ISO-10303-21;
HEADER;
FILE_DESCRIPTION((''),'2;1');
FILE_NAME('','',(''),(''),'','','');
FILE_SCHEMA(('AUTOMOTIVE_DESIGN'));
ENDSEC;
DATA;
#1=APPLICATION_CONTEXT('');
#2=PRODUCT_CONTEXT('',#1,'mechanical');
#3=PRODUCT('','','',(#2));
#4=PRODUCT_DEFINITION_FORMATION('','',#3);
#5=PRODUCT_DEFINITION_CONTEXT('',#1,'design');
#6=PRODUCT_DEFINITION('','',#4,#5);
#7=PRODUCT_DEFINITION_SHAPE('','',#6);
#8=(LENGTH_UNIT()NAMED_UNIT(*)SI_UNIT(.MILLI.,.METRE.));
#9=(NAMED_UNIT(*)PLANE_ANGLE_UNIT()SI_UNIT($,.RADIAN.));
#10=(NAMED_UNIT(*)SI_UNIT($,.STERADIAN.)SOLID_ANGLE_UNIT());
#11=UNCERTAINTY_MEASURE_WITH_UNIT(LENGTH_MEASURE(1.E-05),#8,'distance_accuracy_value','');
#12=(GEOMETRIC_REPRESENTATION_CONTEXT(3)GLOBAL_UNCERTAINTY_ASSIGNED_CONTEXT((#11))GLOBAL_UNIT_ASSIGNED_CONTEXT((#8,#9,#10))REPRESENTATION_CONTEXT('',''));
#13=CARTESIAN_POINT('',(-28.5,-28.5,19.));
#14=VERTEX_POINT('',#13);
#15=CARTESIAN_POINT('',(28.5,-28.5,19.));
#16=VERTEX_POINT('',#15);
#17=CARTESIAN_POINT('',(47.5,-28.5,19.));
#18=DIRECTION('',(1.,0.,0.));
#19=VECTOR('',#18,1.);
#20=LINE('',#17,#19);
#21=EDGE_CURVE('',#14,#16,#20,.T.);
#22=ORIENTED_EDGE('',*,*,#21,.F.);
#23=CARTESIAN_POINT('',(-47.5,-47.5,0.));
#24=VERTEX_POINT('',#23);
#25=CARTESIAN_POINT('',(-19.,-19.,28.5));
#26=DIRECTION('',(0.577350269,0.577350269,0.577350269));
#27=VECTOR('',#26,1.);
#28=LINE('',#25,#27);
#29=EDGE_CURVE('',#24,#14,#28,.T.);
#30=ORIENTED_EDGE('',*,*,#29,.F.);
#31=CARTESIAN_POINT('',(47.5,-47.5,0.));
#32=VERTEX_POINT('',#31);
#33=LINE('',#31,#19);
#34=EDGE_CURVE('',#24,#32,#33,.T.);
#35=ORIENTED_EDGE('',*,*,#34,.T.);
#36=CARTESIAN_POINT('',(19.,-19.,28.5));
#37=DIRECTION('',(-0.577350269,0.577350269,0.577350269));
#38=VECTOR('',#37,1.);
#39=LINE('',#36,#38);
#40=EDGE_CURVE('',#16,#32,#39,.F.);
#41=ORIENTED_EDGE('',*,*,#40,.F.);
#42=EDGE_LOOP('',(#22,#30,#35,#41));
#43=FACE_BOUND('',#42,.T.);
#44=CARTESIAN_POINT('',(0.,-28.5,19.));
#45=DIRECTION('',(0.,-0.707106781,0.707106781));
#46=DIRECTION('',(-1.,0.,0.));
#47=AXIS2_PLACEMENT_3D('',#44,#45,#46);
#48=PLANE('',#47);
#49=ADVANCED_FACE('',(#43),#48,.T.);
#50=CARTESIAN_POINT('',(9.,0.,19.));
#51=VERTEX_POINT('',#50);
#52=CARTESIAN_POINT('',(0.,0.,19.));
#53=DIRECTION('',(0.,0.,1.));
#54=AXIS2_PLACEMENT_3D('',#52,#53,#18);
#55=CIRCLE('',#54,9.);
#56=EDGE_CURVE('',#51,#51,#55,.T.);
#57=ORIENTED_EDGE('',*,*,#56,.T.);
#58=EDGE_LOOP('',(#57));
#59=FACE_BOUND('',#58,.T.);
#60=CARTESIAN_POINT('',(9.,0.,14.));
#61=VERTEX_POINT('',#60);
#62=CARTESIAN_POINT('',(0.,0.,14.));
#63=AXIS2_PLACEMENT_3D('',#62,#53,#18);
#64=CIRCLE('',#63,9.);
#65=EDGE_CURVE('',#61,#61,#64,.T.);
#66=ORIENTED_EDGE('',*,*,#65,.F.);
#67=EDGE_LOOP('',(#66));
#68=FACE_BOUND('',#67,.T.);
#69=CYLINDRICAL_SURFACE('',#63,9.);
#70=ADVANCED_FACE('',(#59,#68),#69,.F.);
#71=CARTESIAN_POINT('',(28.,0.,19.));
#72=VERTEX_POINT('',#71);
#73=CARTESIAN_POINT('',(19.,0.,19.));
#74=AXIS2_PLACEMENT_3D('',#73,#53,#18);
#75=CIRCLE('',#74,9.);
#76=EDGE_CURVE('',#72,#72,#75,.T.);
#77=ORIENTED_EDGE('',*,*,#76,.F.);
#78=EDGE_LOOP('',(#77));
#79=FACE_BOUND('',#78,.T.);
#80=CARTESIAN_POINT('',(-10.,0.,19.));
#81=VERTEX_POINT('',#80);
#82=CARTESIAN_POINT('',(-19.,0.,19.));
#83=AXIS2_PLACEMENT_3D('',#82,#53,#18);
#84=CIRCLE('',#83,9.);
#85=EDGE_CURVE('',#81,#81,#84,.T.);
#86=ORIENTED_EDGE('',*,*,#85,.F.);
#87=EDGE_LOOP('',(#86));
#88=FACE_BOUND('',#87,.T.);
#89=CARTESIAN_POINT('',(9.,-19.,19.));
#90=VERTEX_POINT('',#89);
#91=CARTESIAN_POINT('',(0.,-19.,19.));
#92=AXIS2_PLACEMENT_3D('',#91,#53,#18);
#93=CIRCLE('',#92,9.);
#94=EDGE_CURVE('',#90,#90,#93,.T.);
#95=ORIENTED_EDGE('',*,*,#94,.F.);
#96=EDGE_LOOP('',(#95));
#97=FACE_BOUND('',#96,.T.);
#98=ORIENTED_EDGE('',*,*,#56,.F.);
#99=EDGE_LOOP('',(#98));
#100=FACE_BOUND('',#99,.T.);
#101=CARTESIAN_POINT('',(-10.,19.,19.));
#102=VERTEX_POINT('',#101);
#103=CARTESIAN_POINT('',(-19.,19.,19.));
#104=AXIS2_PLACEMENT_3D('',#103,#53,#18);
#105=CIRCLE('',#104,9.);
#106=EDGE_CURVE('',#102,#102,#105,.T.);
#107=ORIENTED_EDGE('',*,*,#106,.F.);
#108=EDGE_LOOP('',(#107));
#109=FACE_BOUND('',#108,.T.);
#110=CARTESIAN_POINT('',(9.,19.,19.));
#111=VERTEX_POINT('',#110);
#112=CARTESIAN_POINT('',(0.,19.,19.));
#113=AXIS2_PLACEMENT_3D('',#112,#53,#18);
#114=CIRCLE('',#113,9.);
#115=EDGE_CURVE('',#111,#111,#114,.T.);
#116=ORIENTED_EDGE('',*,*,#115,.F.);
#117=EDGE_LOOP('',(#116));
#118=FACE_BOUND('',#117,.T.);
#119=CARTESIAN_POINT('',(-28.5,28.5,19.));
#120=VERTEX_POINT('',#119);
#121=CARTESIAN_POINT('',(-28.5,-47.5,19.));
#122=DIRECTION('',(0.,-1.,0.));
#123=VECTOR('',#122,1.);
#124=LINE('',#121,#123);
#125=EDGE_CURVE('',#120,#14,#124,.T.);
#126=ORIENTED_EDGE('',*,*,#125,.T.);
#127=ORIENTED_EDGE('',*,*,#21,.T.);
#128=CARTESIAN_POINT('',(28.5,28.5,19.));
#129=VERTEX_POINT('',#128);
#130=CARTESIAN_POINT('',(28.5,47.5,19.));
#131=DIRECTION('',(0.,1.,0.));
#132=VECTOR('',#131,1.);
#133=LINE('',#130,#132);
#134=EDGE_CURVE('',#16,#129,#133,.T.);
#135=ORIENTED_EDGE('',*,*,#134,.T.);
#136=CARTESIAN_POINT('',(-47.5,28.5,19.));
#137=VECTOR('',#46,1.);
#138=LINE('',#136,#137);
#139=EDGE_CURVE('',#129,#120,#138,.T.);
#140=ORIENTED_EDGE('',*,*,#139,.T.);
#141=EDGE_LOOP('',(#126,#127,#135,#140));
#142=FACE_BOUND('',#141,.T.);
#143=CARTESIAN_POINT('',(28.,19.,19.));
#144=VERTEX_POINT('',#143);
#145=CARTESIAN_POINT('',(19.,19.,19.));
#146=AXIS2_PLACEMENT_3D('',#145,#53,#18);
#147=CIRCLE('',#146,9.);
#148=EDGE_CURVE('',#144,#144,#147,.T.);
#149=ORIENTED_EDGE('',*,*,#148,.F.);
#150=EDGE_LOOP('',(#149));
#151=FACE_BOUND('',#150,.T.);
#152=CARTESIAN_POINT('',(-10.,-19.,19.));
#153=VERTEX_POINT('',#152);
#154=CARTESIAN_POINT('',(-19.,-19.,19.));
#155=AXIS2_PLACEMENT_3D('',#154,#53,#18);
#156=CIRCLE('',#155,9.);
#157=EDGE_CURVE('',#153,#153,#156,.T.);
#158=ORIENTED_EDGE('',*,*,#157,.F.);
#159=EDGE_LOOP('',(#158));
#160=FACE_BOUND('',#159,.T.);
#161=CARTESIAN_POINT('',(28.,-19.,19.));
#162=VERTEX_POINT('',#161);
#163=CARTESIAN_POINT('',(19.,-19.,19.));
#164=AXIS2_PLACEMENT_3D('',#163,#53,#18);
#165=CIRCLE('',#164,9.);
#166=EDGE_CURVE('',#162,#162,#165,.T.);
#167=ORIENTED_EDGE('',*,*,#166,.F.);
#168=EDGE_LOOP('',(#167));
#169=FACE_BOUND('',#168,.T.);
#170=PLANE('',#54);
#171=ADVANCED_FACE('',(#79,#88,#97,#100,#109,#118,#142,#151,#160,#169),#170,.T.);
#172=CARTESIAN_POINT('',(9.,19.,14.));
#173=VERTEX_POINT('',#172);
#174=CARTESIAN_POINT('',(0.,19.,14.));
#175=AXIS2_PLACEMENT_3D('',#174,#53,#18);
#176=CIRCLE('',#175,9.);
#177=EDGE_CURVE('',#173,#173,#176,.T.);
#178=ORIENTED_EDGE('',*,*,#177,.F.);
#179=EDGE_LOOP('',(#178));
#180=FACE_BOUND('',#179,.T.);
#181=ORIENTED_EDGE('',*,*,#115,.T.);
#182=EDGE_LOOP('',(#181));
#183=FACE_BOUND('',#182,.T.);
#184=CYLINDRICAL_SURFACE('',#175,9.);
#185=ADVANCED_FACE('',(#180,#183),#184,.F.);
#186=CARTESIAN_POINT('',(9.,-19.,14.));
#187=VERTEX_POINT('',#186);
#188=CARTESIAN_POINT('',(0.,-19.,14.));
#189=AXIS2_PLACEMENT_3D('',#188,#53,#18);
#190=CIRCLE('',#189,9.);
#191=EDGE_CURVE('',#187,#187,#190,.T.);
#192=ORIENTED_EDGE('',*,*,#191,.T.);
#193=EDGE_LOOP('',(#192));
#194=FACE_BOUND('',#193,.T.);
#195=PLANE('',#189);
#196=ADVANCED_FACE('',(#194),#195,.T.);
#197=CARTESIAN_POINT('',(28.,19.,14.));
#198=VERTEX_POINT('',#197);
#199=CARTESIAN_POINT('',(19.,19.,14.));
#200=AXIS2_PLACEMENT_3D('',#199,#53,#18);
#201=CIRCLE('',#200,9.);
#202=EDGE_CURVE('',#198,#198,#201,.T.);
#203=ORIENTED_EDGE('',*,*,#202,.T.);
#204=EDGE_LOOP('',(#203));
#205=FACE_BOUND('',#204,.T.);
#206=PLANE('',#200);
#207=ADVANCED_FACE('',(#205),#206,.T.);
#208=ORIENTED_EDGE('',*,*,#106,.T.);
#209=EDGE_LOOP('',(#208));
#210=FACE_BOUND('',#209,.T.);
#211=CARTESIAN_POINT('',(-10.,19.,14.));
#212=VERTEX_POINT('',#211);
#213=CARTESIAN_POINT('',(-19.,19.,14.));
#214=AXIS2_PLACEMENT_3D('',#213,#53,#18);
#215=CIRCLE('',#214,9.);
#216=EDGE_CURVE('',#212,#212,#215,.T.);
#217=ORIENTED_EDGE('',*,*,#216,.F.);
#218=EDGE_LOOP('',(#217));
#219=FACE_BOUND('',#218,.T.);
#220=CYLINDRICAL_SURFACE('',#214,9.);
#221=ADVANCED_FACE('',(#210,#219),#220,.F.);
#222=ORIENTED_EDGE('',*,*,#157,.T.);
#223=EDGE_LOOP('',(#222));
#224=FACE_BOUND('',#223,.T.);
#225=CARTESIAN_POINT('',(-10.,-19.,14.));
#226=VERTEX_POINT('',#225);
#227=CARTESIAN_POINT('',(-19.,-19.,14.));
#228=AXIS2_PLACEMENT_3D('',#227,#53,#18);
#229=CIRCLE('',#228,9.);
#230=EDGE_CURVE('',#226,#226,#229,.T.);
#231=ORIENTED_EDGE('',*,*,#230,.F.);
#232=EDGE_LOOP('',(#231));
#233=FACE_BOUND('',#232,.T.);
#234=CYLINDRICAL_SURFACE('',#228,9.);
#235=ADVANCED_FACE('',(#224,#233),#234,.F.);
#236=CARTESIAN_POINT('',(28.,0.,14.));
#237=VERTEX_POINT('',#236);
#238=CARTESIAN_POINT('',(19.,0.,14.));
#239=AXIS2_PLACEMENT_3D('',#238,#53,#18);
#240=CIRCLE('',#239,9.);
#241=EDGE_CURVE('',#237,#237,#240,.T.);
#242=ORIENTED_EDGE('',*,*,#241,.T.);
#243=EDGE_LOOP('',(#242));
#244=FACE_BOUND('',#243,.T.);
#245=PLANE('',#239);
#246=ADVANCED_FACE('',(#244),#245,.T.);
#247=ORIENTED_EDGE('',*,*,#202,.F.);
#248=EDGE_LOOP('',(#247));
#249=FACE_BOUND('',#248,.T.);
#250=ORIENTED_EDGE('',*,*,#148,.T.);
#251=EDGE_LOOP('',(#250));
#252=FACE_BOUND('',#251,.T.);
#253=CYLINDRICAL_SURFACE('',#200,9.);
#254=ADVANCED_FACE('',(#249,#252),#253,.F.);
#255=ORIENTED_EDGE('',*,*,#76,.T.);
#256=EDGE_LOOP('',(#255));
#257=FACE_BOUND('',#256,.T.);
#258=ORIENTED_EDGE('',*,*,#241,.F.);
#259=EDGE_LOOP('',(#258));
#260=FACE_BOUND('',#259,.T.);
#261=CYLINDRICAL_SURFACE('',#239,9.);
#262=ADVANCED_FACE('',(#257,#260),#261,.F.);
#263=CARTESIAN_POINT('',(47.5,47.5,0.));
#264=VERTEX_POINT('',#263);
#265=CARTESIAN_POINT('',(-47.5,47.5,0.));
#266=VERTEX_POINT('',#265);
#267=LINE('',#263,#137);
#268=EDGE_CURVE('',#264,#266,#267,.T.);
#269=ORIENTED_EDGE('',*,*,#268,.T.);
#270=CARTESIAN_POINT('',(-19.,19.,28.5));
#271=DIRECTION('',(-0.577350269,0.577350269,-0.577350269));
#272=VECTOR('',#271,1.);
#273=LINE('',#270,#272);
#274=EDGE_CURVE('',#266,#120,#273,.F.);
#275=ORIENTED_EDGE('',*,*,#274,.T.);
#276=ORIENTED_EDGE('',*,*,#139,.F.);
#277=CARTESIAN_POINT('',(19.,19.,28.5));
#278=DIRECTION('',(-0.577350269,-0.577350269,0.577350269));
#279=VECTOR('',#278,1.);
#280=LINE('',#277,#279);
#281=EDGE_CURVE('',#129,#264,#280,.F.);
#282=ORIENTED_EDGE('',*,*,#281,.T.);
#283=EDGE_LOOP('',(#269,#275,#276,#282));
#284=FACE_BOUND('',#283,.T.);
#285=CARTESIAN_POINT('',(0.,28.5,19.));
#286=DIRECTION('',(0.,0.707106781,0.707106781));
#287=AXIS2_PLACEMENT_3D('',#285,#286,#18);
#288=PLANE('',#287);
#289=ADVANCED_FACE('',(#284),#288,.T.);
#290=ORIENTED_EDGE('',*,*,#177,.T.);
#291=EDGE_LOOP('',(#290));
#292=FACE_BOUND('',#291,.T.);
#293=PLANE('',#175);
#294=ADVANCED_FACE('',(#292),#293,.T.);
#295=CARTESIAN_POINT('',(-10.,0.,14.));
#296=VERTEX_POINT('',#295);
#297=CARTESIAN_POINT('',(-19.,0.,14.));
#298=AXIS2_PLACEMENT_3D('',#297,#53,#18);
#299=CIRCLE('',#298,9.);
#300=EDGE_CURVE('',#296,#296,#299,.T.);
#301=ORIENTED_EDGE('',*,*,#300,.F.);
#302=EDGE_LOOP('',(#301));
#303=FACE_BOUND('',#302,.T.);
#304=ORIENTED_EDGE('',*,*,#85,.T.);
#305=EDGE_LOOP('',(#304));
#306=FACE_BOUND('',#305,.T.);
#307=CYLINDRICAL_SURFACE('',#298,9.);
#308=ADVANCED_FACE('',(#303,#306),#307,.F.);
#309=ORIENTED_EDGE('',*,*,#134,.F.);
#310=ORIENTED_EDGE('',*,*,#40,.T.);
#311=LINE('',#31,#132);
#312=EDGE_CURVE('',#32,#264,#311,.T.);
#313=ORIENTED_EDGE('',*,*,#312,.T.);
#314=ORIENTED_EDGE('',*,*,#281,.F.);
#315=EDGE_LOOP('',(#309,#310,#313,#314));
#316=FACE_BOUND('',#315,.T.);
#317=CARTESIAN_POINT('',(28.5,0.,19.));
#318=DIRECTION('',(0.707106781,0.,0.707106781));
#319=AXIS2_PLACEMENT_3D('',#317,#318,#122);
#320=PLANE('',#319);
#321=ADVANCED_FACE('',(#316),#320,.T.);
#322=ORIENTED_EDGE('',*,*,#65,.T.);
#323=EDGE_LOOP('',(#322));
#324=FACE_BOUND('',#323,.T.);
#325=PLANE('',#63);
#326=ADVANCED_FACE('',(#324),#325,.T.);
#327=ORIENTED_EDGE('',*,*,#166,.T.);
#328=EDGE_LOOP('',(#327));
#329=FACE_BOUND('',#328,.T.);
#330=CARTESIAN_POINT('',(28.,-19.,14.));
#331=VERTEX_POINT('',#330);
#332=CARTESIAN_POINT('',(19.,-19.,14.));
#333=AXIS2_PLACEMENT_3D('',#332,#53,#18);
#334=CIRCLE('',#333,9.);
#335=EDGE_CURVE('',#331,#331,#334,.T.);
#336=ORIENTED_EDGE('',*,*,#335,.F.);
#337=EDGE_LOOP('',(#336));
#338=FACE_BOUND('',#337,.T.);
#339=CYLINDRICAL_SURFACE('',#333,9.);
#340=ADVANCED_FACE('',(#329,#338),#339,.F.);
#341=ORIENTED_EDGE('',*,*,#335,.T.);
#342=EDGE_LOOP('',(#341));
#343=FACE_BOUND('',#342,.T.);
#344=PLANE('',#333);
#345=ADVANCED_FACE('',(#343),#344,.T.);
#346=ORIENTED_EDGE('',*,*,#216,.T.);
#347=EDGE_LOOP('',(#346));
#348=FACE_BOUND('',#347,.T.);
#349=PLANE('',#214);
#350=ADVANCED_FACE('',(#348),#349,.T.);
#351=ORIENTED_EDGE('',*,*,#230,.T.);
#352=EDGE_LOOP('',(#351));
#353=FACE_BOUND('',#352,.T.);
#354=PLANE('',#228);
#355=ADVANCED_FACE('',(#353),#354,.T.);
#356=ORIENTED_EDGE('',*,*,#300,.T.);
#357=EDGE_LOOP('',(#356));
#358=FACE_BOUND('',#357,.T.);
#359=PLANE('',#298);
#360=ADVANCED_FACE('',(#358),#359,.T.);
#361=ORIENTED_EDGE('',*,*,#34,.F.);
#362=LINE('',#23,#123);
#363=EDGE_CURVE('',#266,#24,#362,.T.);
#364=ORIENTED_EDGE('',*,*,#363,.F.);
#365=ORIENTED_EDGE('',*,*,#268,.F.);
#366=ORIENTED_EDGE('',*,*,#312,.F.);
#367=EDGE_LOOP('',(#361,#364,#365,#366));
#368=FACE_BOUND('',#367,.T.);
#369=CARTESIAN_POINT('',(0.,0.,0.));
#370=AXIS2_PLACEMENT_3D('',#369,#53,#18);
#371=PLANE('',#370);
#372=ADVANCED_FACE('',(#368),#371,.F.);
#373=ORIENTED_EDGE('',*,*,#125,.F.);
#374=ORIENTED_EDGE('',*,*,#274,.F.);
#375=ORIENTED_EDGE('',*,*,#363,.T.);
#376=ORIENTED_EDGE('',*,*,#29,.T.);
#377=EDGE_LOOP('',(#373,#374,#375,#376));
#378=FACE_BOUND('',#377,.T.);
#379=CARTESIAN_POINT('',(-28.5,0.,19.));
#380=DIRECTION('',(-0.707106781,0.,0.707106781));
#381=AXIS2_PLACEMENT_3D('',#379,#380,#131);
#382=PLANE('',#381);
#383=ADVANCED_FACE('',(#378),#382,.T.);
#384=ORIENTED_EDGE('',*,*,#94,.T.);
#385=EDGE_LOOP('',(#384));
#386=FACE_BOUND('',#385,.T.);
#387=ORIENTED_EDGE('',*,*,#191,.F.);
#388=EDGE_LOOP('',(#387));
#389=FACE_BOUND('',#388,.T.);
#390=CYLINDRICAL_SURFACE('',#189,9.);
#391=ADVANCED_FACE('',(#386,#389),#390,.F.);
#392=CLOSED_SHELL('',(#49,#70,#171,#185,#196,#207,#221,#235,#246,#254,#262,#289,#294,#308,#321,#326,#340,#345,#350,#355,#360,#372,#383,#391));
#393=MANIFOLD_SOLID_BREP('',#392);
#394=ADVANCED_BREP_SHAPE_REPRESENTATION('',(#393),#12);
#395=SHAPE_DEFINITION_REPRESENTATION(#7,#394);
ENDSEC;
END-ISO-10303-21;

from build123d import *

# Parameters (mm, degrees)
SKETCH_1_W          = 95
SKETCH_1_H          = 95
EXTRUDE_1_DEPTH     = 19
CHAMFER_1_SIZE      = 19
SKETCH_2_R          = 9
CUT_EXTRUDE_1_DEPTH = 5


with BuildPart() as part:
    # Эскиз1 → Бобышка-Вытянуть1 (new body)
    with BuildSketch(Plane.XY):
        Rectangle(SKETCH_1_W, SKETCH_1_H)
    extrude(amount=EXTRUDE_1_DEPTH)

    # Фаска1
    chamfer_1_edges = [part.edges().sort_by_distance(p)[0] for p in [
        (0, 47.5, 19),
        (47.5, 0, 19),
        (0, -47.5, 19),
        (-47.5, 0, 19),
    ]]
    chamfer(chamfer_1_edges, length=CHAMFER_1_SIZE - 0.0001)  # a hair under: the kernel refuses the full size

    # Эскиз2 → Вырез-Вытянуть1 (cut)
    with BuildSketch(Plane.XY.offset(19)):
        Circle(SKETCH_2_R)
        with Locations((19, 0)):
            Circle(SKETCH_2_R)
        with Locations((19, 19)):
            Circle(SKETCH_2_R)
        with Locations((0, 19)):
            Circle(SKETCH_2_R)
        with Locations((-19, 19)):
            Circle(SKETCH_2_R)
        with Locations((-19, 0)):
            Circle(SKETCH_2_R)
        with Locations((-19, -19)):
            Circle(SKETCH_2_R)
        with Locations((0, -19)):
            Circle(SKETCH_2_R)
        with Locations((19, -19)):
            Circle(SKETCH_2_R)
    extrude(amount=-CUT_EXTRUDE_1_DEPTH, mode=Mode.SUBTRACT)


solid = part.part
